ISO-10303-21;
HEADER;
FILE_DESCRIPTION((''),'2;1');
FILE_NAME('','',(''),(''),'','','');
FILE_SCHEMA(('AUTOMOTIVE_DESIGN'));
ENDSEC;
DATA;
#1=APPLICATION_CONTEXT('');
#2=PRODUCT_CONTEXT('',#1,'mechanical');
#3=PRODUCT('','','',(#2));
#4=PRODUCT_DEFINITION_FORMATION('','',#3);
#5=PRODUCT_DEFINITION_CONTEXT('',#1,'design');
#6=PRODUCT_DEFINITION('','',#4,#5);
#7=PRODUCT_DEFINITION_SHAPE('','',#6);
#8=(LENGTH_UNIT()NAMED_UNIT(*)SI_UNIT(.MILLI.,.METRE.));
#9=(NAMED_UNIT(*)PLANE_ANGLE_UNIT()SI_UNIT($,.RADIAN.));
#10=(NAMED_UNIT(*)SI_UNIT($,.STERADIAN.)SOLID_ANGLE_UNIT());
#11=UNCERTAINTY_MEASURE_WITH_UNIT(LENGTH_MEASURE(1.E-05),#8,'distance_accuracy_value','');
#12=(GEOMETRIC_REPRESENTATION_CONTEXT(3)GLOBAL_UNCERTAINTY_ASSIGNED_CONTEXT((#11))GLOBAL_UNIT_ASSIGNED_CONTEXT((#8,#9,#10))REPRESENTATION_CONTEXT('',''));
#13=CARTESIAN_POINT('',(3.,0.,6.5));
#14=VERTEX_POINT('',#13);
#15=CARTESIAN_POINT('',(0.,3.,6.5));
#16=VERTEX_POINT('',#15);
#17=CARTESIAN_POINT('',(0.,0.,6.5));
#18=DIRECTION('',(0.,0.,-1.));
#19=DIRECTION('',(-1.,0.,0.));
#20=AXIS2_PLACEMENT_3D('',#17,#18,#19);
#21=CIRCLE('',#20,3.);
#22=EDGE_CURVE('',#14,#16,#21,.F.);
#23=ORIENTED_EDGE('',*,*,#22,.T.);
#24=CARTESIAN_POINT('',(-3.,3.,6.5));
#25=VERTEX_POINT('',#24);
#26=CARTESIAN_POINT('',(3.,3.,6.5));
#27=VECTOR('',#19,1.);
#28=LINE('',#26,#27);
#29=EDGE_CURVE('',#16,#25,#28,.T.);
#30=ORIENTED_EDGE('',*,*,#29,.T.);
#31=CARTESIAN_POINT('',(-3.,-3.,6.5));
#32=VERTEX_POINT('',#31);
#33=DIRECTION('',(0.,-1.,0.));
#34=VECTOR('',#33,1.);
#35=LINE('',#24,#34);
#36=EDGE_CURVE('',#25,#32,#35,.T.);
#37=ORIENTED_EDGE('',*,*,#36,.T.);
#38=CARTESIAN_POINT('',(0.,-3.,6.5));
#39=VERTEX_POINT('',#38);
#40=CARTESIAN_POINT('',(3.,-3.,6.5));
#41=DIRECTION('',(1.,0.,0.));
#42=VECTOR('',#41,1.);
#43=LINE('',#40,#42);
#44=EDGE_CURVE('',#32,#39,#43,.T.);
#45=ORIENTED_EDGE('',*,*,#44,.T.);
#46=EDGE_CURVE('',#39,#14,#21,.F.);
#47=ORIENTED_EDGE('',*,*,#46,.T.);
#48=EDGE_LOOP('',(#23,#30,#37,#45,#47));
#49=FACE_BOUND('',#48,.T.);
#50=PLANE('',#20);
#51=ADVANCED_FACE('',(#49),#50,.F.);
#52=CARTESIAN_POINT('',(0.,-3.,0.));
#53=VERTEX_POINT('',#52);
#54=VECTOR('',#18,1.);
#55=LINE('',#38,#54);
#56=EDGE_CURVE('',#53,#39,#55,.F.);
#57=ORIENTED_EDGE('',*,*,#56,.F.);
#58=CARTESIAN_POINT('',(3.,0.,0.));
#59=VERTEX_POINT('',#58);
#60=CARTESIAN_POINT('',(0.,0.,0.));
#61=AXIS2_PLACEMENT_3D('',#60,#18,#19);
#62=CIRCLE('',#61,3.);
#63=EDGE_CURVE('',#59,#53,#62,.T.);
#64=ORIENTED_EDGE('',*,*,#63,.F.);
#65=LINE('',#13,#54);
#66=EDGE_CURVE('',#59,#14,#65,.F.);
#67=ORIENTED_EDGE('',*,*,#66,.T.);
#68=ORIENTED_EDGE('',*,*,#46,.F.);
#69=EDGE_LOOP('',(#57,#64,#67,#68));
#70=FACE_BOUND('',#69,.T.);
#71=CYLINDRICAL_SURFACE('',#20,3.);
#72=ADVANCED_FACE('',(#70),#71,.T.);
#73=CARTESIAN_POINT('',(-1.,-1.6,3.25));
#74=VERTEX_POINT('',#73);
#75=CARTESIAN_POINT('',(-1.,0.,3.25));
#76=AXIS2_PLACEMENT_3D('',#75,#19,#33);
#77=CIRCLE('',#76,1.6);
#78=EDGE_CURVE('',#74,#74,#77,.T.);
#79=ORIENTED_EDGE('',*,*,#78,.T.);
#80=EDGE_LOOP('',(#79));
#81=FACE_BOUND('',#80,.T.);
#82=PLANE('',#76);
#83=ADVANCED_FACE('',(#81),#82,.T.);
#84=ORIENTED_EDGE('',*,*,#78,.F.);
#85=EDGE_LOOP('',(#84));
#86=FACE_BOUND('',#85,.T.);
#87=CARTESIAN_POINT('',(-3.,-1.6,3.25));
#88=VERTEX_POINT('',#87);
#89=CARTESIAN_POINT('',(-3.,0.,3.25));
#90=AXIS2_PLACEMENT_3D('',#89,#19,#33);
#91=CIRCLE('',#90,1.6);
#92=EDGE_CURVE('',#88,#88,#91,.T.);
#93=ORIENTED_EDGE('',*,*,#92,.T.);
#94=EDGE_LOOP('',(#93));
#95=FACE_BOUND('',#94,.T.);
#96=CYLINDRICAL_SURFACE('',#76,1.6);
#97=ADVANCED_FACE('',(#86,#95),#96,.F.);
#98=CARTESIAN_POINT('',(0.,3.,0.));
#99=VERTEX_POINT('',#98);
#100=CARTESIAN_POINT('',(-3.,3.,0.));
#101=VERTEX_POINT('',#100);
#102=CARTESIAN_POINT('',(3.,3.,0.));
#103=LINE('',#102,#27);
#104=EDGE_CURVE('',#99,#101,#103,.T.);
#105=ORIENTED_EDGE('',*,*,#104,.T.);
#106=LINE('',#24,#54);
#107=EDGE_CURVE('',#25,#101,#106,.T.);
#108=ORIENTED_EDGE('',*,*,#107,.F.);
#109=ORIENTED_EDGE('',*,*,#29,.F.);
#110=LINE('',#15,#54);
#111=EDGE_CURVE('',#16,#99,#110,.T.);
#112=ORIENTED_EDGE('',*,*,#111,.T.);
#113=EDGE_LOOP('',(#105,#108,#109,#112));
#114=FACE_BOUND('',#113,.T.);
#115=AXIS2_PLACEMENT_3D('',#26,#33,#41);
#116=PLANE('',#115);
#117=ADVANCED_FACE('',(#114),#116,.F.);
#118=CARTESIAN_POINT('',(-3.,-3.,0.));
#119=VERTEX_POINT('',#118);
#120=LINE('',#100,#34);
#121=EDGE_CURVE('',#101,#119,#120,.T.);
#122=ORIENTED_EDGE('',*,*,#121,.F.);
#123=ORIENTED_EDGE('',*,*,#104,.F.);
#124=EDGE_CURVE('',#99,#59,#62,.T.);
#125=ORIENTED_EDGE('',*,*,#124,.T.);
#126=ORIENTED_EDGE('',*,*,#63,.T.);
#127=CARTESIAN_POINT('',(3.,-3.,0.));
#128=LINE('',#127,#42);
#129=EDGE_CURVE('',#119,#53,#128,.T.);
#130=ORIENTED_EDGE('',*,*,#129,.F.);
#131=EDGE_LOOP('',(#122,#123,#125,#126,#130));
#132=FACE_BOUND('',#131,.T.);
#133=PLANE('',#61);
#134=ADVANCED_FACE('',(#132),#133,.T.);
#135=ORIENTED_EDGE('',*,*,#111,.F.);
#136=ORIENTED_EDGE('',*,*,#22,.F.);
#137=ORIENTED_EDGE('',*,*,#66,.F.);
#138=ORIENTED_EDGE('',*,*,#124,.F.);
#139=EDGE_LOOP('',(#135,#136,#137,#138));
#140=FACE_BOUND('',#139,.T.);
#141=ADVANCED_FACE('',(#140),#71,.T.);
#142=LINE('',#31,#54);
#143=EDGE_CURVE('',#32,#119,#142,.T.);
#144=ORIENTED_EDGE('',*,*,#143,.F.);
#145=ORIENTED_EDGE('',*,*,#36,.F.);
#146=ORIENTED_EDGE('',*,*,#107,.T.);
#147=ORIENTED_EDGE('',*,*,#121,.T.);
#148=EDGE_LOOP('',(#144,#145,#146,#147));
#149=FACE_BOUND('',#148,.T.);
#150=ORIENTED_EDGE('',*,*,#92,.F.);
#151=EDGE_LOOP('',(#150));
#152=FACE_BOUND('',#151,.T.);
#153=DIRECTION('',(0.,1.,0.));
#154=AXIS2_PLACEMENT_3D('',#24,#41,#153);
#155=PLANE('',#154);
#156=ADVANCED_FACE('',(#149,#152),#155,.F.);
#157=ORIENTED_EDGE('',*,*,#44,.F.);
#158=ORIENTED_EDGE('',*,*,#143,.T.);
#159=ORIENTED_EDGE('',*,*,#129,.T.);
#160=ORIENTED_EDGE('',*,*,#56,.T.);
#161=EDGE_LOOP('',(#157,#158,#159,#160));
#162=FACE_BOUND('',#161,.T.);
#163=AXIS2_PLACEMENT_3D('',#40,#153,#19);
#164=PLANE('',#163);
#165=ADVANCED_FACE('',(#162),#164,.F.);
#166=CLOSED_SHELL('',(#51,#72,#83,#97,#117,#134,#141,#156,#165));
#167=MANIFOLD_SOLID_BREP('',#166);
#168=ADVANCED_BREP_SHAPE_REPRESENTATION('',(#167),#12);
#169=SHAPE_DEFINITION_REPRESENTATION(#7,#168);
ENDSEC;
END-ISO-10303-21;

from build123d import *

# Parameters (mm, degrees)
SKETCH1_W           = 6
SKETCH1_H           = 6
BOSS_EXTRUDE1_DEPTH = 6.5
FILLET1_R           = 3
SKETCH2_R           = 1.6
CUT_EXTRUDE1_DEPTH  = 2


with BuildPart() as part:
    # Sketch1 → Boss-Extrude1 (new body)
    with BuildSketch(Plane.XY):
        Rectangle(SKETCH1_W, SKETCH1_H)
    extrude(amount=BOSS_EXTRUDE1_DEPTH)

    # Fillet1
    fillet1_edges = [part.edges().sort_by_distance(p)[0] for p in [
        (3, -3, 3.25),
        (3, 3, 3.25),
    ]]
    fillet(fillet1_edges, radius=FILLET1_R - 0.0001)  # a hair under: the kernel refuses the full size

    # Sketch2 → Cut-Extrude1 (cut)
    with BuildSketch(Plane.ZY.offset(3)):
        with Locations(Location((3.25, 0, 0), (0, 0, 270))):
            Circle(SKETCH2_R)
    extrude(amount=-CUT_EXTRUDE1_DEPTH, mode=Mode.SUBTRACT)


solid = part.part
